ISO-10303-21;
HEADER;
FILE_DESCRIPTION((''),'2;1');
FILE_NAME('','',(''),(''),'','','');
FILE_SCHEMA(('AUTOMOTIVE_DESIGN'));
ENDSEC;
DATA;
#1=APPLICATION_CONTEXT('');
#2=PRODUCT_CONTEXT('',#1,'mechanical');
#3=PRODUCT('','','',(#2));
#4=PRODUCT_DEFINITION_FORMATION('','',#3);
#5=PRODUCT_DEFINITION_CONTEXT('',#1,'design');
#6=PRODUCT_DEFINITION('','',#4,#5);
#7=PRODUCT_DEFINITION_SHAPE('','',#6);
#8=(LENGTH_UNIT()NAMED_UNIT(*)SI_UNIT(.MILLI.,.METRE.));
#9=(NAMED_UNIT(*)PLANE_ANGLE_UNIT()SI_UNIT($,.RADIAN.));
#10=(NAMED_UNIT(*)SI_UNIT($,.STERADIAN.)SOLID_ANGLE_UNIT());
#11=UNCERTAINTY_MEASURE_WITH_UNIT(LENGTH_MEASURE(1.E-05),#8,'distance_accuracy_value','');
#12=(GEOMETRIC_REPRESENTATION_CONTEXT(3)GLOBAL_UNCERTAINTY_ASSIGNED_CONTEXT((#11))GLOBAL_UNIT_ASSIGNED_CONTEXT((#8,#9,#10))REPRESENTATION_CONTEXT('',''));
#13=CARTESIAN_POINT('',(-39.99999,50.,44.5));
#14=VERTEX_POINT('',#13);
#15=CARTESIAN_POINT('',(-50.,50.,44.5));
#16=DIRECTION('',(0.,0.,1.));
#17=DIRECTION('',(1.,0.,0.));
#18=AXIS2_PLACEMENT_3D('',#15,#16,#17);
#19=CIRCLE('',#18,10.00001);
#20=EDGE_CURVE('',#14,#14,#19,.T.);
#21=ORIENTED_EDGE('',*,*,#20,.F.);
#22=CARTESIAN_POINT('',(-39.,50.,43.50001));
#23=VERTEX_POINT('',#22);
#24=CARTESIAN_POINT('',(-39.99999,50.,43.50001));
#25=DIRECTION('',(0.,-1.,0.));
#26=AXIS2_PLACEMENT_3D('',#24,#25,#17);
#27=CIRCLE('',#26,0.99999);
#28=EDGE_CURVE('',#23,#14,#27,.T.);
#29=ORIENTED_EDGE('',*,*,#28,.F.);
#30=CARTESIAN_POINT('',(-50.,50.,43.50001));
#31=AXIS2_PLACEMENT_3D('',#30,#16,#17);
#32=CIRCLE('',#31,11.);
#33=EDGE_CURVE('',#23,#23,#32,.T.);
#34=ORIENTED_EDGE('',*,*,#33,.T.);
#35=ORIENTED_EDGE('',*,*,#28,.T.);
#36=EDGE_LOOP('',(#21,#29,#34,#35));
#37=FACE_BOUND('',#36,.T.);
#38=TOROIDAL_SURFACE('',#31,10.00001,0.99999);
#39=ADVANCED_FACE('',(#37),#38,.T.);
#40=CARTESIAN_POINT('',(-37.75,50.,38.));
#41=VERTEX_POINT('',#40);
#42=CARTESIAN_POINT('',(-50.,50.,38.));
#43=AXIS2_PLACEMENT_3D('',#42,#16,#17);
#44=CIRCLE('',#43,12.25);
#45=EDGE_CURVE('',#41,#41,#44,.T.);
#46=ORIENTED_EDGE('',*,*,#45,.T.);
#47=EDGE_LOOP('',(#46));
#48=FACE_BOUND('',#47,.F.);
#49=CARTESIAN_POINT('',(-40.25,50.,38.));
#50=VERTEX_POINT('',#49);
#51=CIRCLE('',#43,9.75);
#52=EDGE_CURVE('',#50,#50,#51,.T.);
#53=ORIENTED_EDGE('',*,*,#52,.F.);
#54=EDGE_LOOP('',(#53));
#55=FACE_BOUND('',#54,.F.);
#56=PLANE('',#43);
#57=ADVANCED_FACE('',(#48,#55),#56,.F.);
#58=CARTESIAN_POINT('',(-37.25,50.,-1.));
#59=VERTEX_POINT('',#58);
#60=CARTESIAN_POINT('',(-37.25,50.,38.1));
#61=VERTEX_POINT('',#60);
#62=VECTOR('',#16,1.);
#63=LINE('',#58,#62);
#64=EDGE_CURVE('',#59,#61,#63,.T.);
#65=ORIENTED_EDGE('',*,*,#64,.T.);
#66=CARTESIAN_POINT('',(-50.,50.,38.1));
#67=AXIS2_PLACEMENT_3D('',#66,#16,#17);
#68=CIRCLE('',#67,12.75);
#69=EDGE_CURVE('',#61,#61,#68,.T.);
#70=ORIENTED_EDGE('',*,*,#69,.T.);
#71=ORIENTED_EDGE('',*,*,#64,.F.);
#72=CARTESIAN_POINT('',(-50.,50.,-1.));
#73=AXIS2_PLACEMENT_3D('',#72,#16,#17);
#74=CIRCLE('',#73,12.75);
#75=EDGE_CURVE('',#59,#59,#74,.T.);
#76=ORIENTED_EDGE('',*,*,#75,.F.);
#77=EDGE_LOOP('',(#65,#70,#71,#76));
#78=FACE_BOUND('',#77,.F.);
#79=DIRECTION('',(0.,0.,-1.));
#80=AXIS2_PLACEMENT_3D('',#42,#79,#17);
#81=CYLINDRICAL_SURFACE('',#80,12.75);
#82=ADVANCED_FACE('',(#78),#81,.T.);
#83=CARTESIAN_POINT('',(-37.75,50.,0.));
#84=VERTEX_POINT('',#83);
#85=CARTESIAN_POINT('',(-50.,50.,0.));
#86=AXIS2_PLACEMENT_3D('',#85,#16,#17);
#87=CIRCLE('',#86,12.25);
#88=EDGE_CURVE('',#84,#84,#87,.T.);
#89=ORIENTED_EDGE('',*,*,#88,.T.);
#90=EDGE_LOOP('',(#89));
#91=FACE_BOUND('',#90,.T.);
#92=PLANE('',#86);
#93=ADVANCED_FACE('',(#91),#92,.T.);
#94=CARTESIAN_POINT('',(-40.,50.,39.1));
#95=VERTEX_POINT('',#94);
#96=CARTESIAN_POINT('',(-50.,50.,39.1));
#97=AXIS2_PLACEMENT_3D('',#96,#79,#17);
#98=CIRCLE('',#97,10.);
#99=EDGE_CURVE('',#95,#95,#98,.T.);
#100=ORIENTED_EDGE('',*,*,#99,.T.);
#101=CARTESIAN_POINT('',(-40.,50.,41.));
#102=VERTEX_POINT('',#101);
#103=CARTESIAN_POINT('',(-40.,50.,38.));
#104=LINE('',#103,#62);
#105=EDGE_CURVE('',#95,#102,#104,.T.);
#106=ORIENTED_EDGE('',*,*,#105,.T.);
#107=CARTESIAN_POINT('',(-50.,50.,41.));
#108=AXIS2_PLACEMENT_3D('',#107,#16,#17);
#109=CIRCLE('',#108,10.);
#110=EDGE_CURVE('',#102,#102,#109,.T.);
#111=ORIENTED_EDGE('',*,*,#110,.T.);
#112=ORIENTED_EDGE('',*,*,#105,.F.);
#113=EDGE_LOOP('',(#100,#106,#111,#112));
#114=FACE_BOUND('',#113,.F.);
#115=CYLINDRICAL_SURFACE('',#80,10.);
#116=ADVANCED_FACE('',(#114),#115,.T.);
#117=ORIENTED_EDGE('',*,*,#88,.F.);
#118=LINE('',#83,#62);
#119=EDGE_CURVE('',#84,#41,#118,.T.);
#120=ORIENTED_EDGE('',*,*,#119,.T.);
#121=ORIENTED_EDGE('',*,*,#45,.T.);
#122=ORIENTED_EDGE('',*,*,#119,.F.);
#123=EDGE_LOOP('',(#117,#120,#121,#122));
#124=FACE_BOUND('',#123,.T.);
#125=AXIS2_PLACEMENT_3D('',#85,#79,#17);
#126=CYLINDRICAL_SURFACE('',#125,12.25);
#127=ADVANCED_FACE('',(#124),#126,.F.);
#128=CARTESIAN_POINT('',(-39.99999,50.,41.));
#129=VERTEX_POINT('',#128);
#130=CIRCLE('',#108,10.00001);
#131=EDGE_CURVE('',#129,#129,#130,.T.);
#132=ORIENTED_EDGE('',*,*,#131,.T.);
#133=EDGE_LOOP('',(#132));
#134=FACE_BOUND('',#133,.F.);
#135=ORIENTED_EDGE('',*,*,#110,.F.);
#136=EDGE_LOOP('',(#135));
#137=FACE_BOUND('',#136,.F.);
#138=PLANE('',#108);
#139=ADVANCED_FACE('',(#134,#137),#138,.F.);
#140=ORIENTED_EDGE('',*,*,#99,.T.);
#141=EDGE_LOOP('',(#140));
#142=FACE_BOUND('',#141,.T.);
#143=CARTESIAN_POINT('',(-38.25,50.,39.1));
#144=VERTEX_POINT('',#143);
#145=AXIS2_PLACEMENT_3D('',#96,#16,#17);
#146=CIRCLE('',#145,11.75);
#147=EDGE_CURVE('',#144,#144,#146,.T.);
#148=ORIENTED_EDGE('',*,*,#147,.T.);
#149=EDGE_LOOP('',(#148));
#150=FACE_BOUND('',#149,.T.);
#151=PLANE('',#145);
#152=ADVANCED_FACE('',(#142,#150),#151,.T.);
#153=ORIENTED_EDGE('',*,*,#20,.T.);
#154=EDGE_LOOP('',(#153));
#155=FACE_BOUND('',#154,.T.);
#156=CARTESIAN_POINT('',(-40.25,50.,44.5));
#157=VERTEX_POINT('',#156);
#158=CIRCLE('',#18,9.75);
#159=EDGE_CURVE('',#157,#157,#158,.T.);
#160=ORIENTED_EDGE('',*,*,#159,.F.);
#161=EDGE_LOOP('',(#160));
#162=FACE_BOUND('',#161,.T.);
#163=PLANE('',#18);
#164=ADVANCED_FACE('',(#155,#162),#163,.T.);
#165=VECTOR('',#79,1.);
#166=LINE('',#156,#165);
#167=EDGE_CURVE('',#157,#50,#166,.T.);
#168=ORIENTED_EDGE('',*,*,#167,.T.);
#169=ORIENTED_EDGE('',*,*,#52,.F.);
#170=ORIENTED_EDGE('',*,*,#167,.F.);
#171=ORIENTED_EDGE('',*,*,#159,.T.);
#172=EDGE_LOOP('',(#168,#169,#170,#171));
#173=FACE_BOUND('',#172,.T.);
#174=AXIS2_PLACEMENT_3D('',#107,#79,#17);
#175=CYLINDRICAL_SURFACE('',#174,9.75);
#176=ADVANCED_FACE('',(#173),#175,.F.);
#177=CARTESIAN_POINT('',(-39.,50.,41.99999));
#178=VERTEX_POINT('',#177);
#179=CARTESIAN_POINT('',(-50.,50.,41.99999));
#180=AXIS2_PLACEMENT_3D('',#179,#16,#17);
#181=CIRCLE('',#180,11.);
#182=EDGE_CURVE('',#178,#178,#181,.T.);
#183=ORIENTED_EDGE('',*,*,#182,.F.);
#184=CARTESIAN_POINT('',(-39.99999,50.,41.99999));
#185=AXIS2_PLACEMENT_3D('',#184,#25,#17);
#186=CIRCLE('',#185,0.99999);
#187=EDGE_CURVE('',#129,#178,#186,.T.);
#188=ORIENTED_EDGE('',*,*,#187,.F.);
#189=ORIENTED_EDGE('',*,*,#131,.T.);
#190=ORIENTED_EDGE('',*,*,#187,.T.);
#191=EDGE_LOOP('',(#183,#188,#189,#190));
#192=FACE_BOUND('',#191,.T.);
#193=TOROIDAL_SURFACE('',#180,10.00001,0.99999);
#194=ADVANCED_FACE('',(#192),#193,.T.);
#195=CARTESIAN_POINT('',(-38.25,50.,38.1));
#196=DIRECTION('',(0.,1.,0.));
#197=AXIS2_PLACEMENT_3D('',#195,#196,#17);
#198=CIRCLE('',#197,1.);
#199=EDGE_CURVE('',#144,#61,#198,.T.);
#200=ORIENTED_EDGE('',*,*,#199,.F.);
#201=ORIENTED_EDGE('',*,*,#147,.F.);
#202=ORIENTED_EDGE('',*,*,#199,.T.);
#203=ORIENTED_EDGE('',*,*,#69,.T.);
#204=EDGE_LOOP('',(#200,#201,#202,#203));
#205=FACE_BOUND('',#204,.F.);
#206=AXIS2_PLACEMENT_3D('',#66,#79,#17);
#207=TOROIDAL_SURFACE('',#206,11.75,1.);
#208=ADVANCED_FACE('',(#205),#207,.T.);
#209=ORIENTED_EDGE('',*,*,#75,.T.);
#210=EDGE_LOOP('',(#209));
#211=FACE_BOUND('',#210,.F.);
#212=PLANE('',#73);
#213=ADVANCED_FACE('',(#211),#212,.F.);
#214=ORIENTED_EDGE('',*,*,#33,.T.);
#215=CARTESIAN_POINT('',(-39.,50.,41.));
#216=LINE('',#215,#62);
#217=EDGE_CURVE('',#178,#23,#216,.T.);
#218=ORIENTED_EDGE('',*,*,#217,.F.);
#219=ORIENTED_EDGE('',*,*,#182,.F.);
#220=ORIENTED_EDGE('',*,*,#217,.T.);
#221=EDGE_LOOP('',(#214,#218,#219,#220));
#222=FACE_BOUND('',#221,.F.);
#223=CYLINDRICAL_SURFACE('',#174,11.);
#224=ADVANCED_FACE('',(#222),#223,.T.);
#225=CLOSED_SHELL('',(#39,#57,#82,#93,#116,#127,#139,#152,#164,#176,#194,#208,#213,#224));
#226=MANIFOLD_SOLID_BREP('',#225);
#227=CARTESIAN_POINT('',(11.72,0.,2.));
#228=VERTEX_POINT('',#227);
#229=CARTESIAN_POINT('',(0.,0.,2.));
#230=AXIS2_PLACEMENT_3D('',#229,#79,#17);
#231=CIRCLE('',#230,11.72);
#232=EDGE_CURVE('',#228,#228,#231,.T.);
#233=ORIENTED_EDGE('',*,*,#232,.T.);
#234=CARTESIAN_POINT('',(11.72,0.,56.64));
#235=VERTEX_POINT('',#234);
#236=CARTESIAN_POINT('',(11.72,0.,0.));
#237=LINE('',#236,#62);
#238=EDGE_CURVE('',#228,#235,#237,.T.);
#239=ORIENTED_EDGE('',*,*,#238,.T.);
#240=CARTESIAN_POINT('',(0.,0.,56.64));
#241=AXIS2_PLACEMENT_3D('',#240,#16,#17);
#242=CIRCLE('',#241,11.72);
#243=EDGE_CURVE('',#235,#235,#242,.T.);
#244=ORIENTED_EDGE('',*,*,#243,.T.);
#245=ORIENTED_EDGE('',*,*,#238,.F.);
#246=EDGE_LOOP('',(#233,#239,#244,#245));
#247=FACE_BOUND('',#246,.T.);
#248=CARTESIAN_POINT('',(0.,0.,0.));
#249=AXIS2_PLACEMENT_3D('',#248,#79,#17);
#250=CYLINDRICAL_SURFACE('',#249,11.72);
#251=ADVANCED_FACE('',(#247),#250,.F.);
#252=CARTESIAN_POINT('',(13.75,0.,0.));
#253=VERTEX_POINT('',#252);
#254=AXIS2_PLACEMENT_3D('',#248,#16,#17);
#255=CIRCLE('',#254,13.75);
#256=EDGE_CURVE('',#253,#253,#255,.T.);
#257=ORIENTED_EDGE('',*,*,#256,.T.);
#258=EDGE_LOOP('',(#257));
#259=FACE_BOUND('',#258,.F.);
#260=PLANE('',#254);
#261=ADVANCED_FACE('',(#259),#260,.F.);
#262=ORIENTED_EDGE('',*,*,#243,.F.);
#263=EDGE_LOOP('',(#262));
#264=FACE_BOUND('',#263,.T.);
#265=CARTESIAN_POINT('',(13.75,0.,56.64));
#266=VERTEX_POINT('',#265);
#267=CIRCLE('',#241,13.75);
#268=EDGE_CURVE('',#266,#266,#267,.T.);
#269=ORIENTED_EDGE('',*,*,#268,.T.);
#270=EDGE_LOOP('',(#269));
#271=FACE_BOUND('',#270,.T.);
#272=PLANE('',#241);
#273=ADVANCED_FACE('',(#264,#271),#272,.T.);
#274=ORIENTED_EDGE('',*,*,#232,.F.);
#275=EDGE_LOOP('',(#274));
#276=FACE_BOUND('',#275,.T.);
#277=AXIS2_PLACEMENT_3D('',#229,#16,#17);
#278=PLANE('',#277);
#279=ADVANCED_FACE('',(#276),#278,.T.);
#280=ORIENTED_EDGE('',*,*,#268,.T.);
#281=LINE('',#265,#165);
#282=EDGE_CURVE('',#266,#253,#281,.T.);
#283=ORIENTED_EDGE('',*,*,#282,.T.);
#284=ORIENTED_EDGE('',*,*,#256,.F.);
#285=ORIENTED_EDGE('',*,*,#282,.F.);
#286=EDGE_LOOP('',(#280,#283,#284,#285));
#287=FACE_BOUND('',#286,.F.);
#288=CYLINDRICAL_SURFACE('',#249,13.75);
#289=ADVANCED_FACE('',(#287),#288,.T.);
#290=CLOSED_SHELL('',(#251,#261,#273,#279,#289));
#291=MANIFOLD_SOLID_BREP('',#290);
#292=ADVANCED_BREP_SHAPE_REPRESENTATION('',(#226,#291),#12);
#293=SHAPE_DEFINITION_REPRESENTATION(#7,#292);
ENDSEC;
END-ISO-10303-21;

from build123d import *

# Parameters (mm, degrees)
F0_R          = 13.75
F0_R_2        = 11.72
F1_DEPTH      = 2
F2_DEPTH      = 56.64
F3_R          = 12.75
F3_R_2        = 12.25
F4_DEPTH      = 38
F4_DEPTH_BACK = 1
F5_DEPTH      = 1
F6_R          = 12.75
F6_R_2        = 10
F6_R_3        = 9.75
F7_DEPTH      = 1.1
F8_DEPTH      = 3
F9_R          = 11
F9_R_2        = 10
F9_R_3        = 9.75
F10_DEPTH     = 3.5
F11_R         = 1
F12_R         = 0.99999


# Not quite as in the source:
# - a fillet or chamfer is up to 0.001 mm smaller than in the source, because OpenCascade refuses the exact size


with BuildPart() as f1:
    # F0 (on Top) → F1 (new body)
    with BuildSketch(Plane.XY):
        Circle(F0_R)
        Circle(F0_R_2, mode=Mode.SUBTRACT)
        Circle(F0_R_2)
    extrude(amount=F1_DEPTH)

    # F0 (on Top) → F2 (join)
    with BuildSketch(Plane.XY):
        Circle(F0_R)
        Circle(F0_R_2, mode=Mode.SUBTRACT)
    extrude(amount=F2_DEPTH)


with BuildPart() as f4:
    # F3 (on Top) → F4 (new body, two sides)
    with BuildSketch(Plane.XY) as f4_sk:
        with Locations((-50, 50)):
            Circle(F3_R)
        with Locations((-50, 50)):
            Circle(F3_R_2, mode=Mode.SUBTRACT)
    extrude(amount=F4_DEPTH)
    extrude(f4_sk.sketch, amount=-F4_DEPTH_BACK)

    # F3 (on Top) → F5 (join)
    with BuildSketch(Plane.XY):
        with Locations((-50, 50)):
            Circle(F3_R_2)
    extrude(amount=-F5_DEPTH)

    # F6 (on face) → F7 (join)
    with BuildSketch(Plane.XY.offset(38)):
        with Locations((-50, 50)):
            Circle(F6_R)
        with Locations((-50, 50)):
            Circle(F6_R_2, mode=Mode.SUBTRACT)
        with Locations((-50, 50)):
            Circle(F6_R_2)
        with Locations((-50, 50)):
            Circle(F6_R_3, mode=Mode.SUBTRACT)
    extrude(amount=F7_DEPTH)

    # F6 (on face) → F8 (join)
    with BuildSketch(Plane.XY.offset(38)):
        with Locations((-50, 50)):
            Circle(F6_R_2)
        with Locations((-50, 50)):
            Circle(F6_R_3, mode=Mode.SUBTRACT)
    extrude(amount=F8_DEPTH)

    # F9 (on face) → F10 (join)
    with BuildSketch(Plane.XY.offset(41)):
        with Locations((-50, 50)):
            Circle(F9_R)
        with Locations((-50, 50)):
            Circle(F9_R_2, mode=Mode.SUBTRACT)
        with Locations((-50, 50)):
            Circle(F9_R_2)
        with Locations((-50, 50)):
            Circle(F9_R_3, mode=Mode.SUBTRACT)
    extrude(amount=F10_DEPTH)

    # F11
    f11_edges = [f4.edges().sort_by_distance(p)[0] for p in [
        (-62.75, 50, 39.1),
    ]]
    fillet(f11_edges, radius=F11_R)

    # F12 (radius 1 in the source; OpenCascade refuses exactly that, so slightly less here)
    f12_edges = [f4.edges().sort_by_distance(p)[0] for p in [
        (-61, 50, 41),
        (-61, 50, 44.5),
    ]]
    fillet(f12_edges, radius=F12_R)


solid = Compound([f1.part, f4.part])
